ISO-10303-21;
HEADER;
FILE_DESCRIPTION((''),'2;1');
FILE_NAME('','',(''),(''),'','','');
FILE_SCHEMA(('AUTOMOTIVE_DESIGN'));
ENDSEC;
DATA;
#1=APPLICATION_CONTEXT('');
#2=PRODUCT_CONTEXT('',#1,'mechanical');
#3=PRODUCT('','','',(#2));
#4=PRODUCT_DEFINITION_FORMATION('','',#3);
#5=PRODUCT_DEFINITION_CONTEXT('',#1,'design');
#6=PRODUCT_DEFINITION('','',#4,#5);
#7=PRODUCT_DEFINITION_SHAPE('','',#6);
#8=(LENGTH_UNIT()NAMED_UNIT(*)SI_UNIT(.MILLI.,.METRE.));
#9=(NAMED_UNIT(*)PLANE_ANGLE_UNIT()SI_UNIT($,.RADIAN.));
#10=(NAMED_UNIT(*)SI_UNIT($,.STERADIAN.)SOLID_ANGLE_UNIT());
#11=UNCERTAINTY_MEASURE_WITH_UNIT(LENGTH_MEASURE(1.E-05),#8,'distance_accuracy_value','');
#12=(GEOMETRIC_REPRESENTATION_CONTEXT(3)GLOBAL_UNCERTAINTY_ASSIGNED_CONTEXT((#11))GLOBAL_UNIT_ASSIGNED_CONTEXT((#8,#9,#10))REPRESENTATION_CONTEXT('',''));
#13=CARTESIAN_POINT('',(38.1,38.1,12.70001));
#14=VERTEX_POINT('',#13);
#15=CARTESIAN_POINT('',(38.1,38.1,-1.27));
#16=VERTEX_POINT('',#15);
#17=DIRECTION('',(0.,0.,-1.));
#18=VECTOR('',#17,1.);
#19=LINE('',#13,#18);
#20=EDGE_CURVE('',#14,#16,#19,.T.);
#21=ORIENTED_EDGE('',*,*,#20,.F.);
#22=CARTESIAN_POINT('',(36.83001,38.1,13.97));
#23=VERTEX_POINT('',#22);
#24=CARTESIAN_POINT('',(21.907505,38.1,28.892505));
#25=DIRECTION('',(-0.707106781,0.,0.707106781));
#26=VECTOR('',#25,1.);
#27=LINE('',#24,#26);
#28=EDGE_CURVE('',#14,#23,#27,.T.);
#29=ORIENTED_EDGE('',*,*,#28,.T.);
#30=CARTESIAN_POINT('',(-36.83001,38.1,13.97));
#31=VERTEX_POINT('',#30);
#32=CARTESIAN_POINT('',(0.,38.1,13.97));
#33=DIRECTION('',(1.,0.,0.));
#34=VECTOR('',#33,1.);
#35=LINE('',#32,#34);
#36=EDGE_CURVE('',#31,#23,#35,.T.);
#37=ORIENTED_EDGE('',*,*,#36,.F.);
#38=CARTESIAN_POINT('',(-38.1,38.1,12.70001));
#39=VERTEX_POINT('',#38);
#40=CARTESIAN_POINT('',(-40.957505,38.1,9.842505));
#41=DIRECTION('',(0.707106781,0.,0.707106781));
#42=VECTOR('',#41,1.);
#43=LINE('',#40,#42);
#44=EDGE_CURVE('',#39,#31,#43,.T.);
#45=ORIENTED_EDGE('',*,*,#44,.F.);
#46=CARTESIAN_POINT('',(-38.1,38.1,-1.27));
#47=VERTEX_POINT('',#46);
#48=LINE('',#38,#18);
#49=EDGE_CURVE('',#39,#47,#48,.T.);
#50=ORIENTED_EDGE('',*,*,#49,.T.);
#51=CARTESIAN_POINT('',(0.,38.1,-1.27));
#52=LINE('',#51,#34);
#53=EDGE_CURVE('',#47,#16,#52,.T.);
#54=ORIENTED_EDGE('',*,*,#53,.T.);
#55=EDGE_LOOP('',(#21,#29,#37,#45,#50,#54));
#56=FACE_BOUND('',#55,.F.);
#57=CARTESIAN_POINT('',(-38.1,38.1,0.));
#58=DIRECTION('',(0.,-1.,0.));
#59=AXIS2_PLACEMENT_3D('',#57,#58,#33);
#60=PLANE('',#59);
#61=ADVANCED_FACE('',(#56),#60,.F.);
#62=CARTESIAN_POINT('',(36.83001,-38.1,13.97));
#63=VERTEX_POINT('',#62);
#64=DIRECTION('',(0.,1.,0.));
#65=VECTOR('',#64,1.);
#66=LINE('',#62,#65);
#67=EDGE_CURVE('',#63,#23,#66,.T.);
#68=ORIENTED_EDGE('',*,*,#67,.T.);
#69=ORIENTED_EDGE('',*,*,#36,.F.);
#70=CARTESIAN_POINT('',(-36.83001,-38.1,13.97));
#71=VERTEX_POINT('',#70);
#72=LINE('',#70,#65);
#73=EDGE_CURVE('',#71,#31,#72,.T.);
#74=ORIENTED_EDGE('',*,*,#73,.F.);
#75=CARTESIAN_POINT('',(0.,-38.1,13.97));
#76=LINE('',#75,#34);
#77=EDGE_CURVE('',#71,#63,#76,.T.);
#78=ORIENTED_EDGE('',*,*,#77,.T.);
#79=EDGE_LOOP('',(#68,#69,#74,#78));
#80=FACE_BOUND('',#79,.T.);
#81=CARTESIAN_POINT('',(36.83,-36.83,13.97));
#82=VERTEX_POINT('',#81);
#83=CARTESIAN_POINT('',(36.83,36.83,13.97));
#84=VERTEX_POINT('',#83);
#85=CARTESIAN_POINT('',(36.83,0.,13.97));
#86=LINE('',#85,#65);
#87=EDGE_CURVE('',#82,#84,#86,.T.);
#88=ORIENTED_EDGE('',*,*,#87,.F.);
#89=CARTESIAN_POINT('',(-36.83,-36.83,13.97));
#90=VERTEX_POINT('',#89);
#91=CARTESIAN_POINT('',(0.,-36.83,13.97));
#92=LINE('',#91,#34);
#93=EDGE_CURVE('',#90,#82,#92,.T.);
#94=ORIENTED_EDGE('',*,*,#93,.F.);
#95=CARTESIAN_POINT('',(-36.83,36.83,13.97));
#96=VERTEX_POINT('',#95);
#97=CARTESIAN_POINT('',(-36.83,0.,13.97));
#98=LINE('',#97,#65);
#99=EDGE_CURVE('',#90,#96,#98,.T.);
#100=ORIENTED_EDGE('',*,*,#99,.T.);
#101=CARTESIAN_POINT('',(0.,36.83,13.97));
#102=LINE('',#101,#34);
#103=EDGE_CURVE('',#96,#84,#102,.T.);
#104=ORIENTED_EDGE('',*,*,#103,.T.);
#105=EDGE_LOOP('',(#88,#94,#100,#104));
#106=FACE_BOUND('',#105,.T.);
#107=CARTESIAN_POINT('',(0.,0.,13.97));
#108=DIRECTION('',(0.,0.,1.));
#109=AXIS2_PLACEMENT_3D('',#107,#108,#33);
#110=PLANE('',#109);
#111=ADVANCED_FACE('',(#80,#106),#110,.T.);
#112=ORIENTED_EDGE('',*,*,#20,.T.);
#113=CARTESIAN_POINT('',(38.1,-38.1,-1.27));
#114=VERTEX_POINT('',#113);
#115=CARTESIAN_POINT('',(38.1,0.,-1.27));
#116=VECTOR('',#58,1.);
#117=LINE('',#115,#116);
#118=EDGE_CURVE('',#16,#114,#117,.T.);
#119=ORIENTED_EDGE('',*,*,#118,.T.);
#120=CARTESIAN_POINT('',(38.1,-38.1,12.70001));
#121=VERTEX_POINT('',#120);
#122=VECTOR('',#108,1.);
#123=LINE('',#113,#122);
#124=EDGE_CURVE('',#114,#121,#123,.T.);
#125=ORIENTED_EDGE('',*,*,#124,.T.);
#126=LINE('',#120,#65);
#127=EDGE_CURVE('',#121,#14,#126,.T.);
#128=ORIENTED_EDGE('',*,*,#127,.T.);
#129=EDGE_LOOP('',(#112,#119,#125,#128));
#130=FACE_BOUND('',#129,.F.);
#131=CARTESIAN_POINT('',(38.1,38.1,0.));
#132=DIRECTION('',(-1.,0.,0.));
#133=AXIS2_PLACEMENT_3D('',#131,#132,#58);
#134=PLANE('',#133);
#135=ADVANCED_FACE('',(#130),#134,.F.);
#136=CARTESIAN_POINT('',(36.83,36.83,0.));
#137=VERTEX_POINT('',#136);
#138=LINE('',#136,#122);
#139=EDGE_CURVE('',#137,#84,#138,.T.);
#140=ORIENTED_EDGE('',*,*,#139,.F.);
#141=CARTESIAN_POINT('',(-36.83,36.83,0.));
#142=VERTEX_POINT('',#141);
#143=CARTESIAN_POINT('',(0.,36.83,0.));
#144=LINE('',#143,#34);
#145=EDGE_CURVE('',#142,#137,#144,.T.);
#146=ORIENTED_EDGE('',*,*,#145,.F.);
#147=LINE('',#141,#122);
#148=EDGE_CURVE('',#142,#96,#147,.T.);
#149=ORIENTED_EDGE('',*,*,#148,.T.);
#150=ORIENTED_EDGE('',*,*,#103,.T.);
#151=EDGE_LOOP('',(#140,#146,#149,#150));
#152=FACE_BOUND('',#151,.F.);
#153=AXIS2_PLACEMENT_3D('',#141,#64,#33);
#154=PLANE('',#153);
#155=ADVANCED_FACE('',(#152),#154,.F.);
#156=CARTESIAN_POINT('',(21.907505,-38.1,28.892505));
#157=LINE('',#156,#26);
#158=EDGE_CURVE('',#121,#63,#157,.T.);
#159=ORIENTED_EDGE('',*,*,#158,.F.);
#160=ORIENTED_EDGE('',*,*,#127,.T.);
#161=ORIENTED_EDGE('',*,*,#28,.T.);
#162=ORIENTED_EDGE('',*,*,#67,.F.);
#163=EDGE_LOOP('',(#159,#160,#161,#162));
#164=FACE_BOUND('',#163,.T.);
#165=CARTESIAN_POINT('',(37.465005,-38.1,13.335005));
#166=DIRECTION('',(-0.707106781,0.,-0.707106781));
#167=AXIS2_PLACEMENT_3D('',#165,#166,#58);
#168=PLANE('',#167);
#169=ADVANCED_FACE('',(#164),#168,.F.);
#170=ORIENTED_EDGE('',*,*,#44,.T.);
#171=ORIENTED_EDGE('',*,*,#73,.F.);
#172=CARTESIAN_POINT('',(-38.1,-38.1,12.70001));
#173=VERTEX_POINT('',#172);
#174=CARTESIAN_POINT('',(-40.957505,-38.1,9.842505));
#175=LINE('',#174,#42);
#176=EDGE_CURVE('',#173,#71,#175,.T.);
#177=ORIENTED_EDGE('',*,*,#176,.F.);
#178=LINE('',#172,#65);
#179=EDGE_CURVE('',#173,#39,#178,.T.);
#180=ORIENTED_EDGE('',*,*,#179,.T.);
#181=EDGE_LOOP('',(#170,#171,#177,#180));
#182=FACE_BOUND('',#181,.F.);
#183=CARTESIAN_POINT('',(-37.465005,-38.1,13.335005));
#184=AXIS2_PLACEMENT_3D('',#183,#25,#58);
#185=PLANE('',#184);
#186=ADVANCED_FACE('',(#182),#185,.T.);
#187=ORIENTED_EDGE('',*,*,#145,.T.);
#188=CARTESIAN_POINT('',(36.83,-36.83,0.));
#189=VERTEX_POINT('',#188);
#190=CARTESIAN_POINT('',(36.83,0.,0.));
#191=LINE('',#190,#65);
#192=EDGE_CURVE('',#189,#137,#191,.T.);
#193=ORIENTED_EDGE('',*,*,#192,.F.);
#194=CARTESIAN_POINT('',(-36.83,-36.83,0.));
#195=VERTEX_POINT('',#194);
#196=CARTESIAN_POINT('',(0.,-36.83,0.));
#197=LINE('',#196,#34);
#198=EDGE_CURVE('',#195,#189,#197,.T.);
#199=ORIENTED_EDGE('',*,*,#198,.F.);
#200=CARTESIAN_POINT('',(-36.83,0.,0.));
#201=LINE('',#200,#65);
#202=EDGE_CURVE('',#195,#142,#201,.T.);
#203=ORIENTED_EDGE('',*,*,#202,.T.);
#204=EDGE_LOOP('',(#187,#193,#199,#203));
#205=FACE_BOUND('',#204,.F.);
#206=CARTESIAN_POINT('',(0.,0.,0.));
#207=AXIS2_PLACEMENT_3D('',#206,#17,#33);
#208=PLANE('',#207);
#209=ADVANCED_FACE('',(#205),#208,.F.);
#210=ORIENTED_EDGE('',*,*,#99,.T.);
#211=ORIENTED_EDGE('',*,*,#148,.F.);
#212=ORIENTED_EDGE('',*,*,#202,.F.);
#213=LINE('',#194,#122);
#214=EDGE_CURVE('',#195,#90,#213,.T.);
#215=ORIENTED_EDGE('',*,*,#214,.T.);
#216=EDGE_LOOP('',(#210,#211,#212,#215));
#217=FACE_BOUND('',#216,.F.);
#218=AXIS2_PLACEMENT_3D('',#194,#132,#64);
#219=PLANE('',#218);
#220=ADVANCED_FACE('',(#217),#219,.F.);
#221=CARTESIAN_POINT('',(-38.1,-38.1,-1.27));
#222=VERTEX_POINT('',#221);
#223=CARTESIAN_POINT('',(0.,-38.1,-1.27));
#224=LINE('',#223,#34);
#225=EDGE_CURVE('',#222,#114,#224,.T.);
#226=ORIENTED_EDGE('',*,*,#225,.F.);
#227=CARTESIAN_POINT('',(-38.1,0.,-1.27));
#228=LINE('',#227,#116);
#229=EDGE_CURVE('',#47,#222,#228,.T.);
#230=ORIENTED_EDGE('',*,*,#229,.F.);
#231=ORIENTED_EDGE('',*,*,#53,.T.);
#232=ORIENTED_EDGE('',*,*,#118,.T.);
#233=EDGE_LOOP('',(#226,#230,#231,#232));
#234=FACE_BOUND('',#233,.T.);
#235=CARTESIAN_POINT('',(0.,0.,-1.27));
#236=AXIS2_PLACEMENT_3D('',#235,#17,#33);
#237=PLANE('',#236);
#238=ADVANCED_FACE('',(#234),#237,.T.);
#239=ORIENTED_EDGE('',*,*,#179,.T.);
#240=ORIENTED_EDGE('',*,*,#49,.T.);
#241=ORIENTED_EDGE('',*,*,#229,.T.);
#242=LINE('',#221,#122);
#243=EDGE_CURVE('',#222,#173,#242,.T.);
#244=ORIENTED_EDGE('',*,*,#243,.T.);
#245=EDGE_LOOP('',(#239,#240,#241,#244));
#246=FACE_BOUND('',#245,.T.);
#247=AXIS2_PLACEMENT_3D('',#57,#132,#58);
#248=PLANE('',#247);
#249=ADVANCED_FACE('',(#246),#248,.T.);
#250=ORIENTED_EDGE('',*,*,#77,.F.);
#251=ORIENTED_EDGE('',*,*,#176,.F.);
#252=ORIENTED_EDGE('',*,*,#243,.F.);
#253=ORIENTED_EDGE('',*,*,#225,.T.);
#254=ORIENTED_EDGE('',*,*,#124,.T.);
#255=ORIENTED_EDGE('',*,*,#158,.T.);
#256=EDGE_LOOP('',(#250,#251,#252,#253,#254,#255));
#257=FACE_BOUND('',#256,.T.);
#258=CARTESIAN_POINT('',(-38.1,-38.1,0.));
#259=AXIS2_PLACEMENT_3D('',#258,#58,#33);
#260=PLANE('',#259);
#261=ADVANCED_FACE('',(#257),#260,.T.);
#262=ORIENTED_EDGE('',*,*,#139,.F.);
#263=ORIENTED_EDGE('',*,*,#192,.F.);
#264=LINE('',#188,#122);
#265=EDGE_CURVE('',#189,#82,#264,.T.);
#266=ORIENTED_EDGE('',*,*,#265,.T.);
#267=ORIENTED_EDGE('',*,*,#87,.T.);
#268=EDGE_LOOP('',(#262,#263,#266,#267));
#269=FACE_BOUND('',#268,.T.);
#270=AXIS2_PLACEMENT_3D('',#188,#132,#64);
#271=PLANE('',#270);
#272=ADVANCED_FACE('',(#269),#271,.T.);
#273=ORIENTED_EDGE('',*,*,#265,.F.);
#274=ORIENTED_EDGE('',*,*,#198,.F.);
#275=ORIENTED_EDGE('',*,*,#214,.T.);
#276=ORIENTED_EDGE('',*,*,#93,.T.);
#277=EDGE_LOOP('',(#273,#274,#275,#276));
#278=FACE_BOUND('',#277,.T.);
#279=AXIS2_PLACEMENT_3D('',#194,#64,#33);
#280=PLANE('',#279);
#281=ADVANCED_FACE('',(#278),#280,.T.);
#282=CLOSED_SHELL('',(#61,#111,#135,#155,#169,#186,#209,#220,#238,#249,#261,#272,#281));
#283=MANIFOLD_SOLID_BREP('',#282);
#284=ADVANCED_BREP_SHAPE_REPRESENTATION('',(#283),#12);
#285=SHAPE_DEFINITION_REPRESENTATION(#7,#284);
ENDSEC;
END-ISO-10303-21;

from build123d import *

# Parameters (mm, degrees)
F0_W     = 76.2
F0_H     = 76.2
F0_W_2   = 73.66
F0_H_2   = 73.66
F1_DEPTH = 13.97
F2_SIZE  = 1.26999
F3_W     = 76.2
F3_H     = 76.2
F4_DEPTH = 1.27


# Not quite as in the source:
# - a fillet or chamfer is up to 0.001 mm smaller than in the source, because OpenCascade refuses the exact size


with BuildPart() as f1:
    # F0 (on Top) → F1 (new body)
    with BuildSketch(Plane.XY):
        Rectangle(F0_W, F0_H)
        Rectangle(F0_W_2, F0_H_2, mode=Mode.SUBTRACT)
    extrude(amount=F1_DEPTH)

    # F2 (size 1.27 in the source; OpenCascade refuses exactly that, so slightly less here)
    f2_edges = [f1.edges().sort_by_distance(p)[0] for p in [
        (-38.1, 0, 13.97),
        (38.1, 0, 13.97),
    ]]
    chamfer(f2_edges, length=F2_SIZE)

    # F3 (on face) → F4 (join)
    with BuildSketch(Plane(origin=(0, 0, 0), x_dir=(1, 0, 0), z_dir=(0, 0, -1))):
        Rectangle(F3_W, F3_H)
    extrude(amount=F4_DEPTH)


solid = f1.part
